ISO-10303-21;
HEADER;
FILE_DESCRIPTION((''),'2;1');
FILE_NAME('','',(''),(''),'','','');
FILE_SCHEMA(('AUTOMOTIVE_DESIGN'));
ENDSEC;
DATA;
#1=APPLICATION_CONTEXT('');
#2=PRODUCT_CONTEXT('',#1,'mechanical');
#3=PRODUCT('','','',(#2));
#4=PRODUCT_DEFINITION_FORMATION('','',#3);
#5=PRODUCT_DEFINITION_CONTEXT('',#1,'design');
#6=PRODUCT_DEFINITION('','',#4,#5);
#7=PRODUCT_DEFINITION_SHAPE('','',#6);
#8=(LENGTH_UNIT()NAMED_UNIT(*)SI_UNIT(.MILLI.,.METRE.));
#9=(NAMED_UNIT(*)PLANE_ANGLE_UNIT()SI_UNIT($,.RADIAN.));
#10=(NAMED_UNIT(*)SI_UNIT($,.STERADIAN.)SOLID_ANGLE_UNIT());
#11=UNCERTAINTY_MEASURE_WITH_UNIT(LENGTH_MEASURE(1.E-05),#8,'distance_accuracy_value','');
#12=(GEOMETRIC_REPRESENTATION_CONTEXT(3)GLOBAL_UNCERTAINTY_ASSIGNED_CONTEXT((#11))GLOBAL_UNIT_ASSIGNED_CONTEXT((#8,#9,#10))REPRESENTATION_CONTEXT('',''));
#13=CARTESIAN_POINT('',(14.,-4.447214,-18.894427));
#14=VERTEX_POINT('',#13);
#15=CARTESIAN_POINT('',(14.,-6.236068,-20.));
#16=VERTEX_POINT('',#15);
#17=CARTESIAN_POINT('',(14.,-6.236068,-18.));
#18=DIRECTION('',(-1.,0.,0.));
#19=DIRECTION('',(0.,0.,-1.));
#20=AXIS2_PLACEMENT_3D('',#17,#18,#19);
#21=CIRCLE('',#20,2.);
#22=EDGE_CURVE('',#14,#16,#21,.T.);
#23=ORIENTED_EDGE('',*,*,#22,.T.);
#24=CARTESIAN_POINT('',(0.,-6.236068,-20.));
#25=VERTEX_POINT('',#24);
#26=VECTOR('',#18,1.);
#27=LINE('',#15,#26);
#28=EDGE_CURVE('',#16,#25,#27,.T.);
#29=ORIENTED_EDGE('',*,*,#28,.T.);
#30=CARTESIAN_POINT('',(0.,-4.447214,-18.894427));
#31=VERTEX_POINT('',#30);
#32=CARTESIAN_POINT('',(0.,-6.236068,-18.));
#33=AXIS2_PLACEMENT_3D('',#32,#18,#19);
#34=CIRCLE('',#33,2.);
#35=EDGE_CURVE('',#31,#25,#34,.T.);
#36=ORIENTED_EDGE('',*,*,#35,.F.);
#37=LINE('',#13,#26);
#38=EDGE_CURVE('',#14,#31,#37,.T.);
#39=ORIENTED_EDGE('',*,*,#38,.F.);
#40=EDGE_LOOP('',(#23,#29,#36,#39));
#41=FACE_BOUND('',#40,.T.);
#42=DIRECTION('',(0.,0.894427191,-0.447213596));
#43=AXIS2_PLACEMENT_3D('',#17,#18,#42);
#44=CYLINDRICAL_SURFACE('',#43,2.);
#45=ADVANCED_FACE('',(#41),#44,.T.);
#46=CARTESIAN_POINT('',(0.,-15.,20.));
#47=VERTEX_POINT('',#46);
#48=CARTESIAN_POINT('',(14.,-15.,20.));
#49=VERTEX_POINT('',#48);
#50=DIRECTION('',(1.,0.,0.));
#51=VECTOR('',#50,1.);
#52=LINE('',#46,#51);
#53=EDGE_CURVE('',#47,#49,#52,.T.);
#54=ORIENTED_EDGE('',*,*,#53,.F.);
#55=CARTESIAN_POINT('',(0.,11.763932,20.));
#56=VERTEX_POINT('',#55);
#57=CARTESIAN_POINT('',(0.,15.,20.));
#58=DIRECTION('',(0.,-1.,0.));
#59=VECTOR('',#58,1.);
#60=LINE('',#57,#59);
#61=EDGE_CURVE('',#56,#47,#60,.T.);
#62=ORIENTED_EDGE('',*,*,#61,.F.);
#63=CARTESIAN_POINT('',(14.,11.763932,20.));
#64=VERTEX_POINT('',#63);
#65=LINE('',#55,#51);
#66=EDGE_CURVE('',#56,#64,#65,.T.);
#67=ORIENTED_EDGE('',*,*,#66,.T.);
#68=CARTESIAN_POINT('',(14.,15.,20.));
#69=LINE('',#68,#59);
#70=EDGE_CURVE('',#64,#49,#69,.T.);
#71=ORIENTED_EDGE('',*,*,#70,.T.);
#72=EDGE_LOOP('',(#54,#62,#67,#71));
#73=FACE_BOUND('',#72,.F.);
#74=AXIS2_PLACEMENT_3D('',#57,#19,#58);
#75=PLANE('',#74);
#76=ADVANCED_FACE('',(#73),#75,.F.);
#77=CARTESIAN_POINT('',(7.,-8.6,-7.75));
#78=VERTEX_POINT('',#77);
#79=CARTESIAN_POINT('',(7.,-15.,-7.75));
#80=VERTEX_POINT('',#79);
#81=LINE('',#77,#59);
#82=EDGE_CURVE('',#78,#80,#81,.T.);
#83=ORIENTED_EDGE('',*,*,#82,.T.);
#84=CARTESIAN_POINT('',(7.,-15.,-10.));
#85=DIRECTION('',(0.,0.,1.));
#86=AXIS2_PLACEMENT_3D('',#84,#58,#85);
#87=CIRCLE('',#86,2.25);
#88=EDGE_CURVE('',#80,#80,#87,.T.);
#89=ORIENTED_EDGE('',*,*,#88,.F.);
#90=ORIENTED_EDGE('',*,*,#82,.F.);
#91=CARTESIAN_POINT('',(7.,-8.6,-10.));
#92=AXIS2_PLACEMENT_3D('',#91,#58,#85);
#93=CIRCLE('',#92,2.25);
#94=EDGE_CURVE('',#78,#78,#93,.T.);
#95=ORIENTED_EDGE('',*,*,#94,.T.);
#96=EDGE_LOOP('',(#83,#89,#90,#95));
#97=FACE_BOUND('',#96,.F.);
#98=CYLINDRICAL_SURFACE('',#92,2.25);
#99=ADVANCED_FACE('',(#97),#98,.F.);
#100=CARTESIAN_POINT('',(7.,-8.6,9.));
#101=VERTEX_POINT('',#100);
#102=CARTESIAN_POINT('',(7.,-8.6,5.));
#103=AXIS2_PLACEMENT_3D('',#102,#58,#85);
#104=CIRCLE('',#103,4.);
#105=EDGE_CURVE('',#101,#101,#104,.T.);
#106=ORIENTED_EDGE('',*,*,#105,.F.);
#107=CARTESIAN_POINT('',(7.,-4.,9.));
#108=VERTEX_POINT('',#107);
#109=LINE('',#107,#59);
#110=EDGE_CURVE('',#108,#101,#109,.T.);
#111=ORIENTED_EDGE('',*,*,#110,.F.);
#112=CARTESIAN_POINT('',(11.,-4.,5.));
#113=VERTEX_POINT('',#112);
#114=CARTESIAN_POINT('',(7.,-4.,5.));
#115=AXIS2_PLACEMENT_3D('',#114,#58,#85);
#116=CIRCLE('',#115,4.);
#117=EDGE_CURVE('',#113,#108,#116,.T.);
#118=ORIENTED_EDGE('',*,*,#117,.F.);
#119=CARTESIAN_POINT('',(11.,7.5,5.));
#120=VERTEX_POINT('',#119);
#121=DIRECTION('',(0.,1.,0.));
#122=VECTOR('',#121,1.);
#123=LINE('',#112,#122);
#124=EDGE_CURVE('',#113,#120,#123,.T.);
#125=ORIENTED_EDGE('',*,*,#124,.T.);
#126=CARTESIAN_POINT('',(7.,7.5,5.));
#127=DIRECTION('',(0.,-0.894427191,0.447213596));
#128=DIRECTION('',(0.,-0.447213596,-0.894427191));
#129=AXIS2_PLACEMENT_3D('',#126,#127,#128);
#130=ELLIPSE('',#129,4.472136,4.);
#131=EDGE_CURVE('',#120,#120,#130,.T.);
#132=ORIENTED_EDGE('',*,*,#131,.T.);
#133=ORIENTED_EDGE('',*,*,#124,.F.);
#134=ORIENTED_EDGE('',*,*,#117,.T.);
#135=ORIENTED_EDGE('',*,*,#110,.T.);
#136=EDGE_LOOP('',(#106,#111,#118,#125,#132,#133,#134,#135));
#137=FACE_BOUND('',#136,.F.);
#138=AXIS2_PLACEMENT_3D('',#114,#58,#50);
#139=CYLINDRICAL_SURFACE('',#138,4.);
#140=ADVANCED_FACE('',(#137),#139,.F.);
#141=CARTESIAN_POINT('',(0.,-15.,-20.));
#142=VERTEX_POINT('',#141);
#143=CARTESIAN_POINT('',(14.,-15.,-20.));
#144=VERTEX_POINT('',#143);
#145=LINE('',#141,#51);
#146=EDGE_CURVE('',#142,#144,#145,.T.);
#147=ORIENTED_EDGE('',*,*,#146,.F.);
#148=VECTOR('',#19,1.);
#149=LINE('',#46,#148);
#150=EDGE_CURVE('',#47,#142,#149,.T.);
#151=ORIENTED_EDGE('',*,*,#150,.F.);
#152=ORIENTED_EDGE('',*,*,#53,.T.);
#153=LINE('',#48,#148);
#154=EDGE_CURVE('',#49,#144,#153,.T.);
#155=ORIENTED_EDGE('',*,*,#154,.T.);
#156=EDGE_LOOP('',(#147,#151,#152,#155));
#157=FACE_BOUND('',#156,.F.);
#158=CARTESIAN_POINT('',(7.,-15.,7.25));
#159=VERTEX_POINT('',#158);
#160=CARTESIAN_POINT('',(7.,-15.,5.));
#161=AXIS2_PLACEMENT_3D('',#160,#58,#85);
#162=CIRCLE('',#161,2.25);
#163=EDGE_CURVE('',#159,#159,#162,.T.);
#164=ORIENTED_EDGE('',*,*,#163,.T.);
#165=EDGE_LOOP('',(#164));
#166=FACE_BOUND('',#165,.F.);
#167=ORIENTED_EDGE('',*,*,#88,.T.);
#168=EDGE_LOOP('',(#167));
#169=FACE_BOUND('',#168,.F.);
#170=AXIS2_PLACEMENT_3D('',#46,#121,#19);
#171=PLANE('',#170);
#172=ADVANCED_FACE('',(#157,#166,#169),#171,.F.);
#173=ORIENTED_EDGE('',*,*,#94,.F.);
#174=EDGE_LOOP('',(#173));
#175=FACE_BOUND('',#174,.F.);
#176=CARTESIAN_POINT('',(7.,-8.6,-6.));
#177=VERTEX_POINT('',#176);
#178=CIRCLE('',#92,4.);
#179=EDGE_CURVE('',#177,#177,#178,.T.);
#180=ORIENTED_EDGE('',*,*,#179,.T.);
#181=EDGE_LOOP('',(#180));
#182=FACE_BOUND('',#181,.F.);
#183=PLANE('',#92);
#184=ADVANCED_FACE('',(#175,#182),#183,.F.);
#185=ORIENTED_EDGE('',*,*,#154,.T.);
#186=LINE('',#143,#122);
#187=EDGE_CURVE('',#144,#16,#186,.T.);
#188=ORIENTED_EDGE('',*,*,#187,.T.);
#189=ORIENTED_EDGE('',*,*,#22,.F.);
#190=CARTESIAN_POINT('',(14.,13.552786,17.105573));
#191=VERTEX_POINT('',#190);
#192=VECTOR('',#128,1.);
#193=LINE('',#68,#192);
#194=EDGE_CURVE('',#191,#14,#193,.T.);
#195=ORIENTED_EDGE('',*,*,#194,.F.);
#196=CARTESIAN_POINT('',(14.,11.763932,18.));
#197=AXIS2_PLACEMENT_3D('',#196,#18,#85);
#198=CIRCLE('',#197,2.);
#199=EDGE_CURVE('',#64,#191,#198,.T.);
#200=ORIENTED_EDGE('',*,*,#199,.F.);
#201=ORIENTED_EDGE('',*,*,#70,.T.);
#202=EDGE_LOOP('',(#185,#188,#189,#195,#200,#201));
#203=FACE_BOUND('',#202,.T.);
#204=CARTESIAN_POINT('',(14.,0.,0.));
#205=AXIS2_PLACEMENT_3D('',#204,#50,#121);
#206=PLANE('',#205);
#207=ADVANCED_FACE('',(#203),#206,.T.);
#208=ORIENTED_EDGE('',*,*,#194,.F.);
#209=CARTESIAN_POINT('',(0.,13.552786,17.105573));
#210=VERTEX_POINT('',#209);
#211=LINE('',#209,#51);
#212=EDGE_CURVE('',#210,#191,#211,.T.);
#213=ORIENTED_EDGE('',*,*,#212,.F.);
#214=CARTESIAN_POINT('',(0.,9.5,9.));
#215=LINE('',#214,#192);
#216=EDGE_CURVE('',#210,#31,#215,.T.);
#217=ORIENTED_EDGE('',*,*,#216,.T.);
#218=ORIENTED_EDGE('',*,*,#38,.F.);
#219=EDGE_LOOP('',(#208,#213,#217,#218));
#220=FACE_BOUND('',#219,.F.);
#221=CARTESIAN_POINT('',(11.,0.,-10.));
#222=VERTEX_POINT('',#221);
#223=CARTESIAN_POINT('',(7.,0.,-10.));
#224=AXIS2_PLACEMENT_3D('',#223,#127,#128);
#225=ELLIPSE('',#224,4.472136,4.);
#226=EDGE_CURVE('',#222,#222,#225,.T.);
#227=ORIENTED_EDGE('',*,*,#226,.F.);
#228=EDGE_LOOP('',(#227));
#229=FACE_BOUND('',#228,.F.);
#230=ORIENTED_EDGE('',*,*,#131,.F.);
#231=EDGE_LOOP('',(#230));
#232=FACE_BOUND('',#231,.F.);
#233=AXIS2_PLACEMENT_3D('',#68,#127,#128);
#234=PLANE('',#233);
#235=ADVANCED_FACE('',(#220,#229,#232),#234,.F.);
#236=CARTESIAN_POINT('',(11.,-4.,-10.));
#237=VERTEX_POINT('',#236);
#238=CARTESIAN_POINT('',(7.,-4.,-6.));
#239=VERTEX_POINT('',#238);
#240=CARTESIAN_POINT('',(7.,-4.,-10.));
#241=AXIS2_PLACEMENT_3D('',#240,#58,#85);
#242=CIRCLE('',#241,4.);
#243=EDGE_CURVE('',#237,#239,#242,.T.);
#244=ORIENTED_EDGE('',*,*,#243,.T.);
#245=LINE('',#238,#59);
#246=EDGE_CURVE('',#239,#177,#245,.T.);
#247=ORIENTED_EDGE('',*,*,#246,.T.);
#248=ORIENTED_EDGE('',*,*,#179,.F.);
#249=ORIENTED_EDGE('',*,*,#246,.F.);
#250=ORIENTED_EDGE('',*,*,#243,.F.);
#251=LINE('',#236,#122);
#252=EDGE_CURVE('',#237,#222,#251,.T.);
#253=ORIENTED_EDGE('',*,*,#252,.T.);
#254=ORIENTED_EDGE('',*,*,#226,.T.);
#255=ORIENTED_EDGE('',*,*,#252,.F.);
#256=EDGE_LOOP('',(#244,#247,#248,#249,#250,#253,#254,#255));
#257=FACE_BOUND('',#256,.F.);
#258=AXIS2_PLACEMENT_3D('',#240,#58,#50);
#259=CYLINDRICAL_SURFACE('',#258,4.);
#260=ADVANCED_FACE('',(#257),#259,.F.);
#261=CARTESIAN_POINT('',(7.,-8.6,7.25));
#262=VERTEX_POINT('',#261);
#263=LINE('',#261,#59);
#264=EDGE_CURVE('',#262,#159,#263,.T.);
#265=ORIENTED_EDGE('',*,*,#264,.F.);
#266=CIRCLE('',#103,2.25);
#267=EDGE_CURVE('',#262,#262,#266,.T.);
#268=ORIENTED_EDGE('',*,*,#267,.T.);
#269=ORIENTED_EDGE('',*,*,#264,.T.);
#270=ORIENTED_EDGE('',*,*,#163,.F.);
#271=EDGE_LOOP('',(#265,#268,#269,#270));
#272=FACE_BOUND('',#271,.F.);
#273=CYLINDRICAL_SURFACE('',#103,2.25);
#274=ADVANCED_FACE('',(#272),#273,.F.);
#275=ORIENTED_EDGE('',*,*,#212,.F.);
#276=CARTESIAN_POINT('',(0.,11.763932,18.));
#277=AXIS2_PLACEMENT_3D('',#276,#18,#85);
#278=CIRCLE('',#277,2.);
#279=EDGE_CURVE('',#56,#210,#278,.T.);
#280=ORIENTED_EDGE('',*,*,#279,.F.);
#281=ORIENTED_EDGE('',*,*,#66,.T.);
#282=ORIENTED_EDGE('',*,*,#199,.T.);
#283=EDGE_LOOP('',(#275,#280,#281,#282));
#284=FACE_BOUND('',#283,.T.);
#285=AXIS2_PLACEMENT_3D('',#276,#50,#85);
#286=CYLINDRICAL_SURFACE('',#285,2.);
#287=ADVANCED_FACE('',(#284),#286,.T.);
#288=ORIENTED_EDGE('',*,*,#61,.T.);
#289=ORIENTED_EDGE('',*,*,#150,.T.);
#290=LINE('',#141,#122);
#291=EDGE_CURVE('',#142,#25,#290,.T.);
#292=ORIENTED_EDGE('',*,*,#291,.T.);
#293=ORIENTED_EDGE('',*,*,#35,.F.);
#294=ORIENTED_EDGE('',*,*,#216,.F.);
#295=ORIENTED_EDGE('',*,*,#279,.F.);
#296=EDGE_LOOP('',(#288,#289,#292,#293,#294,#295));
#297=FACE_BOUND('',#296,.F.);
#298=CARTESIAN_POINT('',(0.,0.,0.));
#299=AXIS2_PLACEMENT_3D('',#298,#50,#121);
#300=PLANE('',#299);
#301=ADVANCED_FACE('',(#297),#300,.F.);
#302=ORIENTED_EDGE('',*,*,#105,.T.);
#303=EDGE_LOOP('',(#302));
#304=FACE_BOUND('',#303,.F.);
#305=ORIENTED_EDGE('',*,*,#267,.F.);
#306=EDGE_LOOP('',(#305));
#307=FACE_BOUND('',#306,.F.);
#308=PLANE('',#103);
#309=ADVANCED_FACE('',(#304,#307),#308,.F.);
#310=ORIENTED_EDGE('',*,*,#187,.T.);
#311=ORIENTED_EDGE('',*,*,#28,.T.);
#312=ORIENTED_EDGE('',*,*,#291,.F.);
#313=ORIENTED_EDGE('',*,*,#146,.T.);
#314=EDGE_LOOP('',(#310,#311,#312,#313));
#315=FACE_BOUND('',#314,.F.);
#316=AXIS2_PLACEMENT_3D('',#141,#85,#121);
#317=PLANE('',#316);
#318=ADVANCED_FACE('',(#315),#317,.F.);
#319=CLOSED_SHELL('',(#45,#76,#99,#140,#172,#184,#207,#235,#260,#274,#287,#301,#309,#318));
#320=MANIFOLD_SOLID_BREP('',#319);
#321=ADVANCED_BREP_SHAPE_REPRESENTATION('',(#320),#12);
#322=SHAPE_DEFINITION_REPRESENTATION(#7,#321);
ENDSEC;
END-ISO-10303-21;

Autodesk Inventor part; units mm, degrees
ref_plane "YZ Plane" through (0, 0, 0) normal (1, 0, 0) x (0, 1, 0)
ref_plane "XZ Plane" through (0, 0, 0) normal (0, 1, 0) x (-1, 0, 0)
sketch "Sketch1" plane through (0, 0, 0) normal (1, 0, 0) x (0, 1, 0)
  line L0 (15, 20) -> (-15, 20)
  line L1 (-15, 20) -> (-15, -20)
  line L2 (-15, -20) -> (15, -20)
  line L3 (15, -20) -> (15, 20)
  line L4 (15, 20) -> (-15, -20) construction
  line L5 (-15, 20) -> (15, -20) construction
  point P0 (0, 0)
  dimension "d0" = 30
  dimension "d1" = 40
extrude "Extrusion1" add sketch "Sketch1" along normal blind 14
sketch "Sketch2" plane through (14, 0, 0) normal (1, 0, 0) x (0, 0, -1)
  line L0 (-20, -15) -> (20, -15) projected
  line L1 (20, -15) -> (20, 15) projected
  line L2 (20, 15) -> (-20, 15) projected
  line L3 (-20, 15) -> (-20, -15) projected
  line L4 (-20, 15) -> (20, -5)
  point P0 (0, 0)
  dimension "d4" = 10
extrude "Extrusion2" cut sketch "Sketch2" against normal through all contours L2 L1 L4
fillet "Fillet1" radius 2 2 edges at (7, 15, 20) (7, -5, -20)
ref_plane "Work Plane1" through (0, -4, -20) normal (0, -1, 0) x (1, 0, 0)
sketch "Sketch3" plane through (0, -4, -20) normal (0, -1, 0) x (1, 0, 0)
  line L0 (0, 40) -> (14, 40) projected
  line L1 (0, 40) -> (14, 40) projected
  line L2 (14, 0) -> (0, 0) projected
  line L3 (0, 0) -> (14, 0) projected
  point P0 (0, 20)
  point P1 (7, 10)
  point P2 (7, 25)
  point P3 (7, 40)
  dimension "d9" = 15
  dimension "d10" = 10
hole "Hole1" at (7, -4, -10) at (7, -4, 5) direction (0, -1, 0) diameter 4.5 end through all counterbore diameter 8 counterbore depth 4.6 clearance for "Socket Head Cap Screw ISO 4762" size "M4" standard "ISO"
sketch "Sketch4" plane through (0, -4, -20) normal (0, -1, 0) x (1, 0, 0)
  circle A0 centre (7, 10) radius 4 projected
  circle A1 centre (7, 10) radius 4 projected
  circle A2 centre (7, 25) radius 4 projected
  circle A3 centre (7, 25) radius 4 projected
  point P0 (0, 20)
extrude "Extrusion3" cut sketch "Sketch4" against normal through all
properties part number "blokada_hiwin_3DPrint"
